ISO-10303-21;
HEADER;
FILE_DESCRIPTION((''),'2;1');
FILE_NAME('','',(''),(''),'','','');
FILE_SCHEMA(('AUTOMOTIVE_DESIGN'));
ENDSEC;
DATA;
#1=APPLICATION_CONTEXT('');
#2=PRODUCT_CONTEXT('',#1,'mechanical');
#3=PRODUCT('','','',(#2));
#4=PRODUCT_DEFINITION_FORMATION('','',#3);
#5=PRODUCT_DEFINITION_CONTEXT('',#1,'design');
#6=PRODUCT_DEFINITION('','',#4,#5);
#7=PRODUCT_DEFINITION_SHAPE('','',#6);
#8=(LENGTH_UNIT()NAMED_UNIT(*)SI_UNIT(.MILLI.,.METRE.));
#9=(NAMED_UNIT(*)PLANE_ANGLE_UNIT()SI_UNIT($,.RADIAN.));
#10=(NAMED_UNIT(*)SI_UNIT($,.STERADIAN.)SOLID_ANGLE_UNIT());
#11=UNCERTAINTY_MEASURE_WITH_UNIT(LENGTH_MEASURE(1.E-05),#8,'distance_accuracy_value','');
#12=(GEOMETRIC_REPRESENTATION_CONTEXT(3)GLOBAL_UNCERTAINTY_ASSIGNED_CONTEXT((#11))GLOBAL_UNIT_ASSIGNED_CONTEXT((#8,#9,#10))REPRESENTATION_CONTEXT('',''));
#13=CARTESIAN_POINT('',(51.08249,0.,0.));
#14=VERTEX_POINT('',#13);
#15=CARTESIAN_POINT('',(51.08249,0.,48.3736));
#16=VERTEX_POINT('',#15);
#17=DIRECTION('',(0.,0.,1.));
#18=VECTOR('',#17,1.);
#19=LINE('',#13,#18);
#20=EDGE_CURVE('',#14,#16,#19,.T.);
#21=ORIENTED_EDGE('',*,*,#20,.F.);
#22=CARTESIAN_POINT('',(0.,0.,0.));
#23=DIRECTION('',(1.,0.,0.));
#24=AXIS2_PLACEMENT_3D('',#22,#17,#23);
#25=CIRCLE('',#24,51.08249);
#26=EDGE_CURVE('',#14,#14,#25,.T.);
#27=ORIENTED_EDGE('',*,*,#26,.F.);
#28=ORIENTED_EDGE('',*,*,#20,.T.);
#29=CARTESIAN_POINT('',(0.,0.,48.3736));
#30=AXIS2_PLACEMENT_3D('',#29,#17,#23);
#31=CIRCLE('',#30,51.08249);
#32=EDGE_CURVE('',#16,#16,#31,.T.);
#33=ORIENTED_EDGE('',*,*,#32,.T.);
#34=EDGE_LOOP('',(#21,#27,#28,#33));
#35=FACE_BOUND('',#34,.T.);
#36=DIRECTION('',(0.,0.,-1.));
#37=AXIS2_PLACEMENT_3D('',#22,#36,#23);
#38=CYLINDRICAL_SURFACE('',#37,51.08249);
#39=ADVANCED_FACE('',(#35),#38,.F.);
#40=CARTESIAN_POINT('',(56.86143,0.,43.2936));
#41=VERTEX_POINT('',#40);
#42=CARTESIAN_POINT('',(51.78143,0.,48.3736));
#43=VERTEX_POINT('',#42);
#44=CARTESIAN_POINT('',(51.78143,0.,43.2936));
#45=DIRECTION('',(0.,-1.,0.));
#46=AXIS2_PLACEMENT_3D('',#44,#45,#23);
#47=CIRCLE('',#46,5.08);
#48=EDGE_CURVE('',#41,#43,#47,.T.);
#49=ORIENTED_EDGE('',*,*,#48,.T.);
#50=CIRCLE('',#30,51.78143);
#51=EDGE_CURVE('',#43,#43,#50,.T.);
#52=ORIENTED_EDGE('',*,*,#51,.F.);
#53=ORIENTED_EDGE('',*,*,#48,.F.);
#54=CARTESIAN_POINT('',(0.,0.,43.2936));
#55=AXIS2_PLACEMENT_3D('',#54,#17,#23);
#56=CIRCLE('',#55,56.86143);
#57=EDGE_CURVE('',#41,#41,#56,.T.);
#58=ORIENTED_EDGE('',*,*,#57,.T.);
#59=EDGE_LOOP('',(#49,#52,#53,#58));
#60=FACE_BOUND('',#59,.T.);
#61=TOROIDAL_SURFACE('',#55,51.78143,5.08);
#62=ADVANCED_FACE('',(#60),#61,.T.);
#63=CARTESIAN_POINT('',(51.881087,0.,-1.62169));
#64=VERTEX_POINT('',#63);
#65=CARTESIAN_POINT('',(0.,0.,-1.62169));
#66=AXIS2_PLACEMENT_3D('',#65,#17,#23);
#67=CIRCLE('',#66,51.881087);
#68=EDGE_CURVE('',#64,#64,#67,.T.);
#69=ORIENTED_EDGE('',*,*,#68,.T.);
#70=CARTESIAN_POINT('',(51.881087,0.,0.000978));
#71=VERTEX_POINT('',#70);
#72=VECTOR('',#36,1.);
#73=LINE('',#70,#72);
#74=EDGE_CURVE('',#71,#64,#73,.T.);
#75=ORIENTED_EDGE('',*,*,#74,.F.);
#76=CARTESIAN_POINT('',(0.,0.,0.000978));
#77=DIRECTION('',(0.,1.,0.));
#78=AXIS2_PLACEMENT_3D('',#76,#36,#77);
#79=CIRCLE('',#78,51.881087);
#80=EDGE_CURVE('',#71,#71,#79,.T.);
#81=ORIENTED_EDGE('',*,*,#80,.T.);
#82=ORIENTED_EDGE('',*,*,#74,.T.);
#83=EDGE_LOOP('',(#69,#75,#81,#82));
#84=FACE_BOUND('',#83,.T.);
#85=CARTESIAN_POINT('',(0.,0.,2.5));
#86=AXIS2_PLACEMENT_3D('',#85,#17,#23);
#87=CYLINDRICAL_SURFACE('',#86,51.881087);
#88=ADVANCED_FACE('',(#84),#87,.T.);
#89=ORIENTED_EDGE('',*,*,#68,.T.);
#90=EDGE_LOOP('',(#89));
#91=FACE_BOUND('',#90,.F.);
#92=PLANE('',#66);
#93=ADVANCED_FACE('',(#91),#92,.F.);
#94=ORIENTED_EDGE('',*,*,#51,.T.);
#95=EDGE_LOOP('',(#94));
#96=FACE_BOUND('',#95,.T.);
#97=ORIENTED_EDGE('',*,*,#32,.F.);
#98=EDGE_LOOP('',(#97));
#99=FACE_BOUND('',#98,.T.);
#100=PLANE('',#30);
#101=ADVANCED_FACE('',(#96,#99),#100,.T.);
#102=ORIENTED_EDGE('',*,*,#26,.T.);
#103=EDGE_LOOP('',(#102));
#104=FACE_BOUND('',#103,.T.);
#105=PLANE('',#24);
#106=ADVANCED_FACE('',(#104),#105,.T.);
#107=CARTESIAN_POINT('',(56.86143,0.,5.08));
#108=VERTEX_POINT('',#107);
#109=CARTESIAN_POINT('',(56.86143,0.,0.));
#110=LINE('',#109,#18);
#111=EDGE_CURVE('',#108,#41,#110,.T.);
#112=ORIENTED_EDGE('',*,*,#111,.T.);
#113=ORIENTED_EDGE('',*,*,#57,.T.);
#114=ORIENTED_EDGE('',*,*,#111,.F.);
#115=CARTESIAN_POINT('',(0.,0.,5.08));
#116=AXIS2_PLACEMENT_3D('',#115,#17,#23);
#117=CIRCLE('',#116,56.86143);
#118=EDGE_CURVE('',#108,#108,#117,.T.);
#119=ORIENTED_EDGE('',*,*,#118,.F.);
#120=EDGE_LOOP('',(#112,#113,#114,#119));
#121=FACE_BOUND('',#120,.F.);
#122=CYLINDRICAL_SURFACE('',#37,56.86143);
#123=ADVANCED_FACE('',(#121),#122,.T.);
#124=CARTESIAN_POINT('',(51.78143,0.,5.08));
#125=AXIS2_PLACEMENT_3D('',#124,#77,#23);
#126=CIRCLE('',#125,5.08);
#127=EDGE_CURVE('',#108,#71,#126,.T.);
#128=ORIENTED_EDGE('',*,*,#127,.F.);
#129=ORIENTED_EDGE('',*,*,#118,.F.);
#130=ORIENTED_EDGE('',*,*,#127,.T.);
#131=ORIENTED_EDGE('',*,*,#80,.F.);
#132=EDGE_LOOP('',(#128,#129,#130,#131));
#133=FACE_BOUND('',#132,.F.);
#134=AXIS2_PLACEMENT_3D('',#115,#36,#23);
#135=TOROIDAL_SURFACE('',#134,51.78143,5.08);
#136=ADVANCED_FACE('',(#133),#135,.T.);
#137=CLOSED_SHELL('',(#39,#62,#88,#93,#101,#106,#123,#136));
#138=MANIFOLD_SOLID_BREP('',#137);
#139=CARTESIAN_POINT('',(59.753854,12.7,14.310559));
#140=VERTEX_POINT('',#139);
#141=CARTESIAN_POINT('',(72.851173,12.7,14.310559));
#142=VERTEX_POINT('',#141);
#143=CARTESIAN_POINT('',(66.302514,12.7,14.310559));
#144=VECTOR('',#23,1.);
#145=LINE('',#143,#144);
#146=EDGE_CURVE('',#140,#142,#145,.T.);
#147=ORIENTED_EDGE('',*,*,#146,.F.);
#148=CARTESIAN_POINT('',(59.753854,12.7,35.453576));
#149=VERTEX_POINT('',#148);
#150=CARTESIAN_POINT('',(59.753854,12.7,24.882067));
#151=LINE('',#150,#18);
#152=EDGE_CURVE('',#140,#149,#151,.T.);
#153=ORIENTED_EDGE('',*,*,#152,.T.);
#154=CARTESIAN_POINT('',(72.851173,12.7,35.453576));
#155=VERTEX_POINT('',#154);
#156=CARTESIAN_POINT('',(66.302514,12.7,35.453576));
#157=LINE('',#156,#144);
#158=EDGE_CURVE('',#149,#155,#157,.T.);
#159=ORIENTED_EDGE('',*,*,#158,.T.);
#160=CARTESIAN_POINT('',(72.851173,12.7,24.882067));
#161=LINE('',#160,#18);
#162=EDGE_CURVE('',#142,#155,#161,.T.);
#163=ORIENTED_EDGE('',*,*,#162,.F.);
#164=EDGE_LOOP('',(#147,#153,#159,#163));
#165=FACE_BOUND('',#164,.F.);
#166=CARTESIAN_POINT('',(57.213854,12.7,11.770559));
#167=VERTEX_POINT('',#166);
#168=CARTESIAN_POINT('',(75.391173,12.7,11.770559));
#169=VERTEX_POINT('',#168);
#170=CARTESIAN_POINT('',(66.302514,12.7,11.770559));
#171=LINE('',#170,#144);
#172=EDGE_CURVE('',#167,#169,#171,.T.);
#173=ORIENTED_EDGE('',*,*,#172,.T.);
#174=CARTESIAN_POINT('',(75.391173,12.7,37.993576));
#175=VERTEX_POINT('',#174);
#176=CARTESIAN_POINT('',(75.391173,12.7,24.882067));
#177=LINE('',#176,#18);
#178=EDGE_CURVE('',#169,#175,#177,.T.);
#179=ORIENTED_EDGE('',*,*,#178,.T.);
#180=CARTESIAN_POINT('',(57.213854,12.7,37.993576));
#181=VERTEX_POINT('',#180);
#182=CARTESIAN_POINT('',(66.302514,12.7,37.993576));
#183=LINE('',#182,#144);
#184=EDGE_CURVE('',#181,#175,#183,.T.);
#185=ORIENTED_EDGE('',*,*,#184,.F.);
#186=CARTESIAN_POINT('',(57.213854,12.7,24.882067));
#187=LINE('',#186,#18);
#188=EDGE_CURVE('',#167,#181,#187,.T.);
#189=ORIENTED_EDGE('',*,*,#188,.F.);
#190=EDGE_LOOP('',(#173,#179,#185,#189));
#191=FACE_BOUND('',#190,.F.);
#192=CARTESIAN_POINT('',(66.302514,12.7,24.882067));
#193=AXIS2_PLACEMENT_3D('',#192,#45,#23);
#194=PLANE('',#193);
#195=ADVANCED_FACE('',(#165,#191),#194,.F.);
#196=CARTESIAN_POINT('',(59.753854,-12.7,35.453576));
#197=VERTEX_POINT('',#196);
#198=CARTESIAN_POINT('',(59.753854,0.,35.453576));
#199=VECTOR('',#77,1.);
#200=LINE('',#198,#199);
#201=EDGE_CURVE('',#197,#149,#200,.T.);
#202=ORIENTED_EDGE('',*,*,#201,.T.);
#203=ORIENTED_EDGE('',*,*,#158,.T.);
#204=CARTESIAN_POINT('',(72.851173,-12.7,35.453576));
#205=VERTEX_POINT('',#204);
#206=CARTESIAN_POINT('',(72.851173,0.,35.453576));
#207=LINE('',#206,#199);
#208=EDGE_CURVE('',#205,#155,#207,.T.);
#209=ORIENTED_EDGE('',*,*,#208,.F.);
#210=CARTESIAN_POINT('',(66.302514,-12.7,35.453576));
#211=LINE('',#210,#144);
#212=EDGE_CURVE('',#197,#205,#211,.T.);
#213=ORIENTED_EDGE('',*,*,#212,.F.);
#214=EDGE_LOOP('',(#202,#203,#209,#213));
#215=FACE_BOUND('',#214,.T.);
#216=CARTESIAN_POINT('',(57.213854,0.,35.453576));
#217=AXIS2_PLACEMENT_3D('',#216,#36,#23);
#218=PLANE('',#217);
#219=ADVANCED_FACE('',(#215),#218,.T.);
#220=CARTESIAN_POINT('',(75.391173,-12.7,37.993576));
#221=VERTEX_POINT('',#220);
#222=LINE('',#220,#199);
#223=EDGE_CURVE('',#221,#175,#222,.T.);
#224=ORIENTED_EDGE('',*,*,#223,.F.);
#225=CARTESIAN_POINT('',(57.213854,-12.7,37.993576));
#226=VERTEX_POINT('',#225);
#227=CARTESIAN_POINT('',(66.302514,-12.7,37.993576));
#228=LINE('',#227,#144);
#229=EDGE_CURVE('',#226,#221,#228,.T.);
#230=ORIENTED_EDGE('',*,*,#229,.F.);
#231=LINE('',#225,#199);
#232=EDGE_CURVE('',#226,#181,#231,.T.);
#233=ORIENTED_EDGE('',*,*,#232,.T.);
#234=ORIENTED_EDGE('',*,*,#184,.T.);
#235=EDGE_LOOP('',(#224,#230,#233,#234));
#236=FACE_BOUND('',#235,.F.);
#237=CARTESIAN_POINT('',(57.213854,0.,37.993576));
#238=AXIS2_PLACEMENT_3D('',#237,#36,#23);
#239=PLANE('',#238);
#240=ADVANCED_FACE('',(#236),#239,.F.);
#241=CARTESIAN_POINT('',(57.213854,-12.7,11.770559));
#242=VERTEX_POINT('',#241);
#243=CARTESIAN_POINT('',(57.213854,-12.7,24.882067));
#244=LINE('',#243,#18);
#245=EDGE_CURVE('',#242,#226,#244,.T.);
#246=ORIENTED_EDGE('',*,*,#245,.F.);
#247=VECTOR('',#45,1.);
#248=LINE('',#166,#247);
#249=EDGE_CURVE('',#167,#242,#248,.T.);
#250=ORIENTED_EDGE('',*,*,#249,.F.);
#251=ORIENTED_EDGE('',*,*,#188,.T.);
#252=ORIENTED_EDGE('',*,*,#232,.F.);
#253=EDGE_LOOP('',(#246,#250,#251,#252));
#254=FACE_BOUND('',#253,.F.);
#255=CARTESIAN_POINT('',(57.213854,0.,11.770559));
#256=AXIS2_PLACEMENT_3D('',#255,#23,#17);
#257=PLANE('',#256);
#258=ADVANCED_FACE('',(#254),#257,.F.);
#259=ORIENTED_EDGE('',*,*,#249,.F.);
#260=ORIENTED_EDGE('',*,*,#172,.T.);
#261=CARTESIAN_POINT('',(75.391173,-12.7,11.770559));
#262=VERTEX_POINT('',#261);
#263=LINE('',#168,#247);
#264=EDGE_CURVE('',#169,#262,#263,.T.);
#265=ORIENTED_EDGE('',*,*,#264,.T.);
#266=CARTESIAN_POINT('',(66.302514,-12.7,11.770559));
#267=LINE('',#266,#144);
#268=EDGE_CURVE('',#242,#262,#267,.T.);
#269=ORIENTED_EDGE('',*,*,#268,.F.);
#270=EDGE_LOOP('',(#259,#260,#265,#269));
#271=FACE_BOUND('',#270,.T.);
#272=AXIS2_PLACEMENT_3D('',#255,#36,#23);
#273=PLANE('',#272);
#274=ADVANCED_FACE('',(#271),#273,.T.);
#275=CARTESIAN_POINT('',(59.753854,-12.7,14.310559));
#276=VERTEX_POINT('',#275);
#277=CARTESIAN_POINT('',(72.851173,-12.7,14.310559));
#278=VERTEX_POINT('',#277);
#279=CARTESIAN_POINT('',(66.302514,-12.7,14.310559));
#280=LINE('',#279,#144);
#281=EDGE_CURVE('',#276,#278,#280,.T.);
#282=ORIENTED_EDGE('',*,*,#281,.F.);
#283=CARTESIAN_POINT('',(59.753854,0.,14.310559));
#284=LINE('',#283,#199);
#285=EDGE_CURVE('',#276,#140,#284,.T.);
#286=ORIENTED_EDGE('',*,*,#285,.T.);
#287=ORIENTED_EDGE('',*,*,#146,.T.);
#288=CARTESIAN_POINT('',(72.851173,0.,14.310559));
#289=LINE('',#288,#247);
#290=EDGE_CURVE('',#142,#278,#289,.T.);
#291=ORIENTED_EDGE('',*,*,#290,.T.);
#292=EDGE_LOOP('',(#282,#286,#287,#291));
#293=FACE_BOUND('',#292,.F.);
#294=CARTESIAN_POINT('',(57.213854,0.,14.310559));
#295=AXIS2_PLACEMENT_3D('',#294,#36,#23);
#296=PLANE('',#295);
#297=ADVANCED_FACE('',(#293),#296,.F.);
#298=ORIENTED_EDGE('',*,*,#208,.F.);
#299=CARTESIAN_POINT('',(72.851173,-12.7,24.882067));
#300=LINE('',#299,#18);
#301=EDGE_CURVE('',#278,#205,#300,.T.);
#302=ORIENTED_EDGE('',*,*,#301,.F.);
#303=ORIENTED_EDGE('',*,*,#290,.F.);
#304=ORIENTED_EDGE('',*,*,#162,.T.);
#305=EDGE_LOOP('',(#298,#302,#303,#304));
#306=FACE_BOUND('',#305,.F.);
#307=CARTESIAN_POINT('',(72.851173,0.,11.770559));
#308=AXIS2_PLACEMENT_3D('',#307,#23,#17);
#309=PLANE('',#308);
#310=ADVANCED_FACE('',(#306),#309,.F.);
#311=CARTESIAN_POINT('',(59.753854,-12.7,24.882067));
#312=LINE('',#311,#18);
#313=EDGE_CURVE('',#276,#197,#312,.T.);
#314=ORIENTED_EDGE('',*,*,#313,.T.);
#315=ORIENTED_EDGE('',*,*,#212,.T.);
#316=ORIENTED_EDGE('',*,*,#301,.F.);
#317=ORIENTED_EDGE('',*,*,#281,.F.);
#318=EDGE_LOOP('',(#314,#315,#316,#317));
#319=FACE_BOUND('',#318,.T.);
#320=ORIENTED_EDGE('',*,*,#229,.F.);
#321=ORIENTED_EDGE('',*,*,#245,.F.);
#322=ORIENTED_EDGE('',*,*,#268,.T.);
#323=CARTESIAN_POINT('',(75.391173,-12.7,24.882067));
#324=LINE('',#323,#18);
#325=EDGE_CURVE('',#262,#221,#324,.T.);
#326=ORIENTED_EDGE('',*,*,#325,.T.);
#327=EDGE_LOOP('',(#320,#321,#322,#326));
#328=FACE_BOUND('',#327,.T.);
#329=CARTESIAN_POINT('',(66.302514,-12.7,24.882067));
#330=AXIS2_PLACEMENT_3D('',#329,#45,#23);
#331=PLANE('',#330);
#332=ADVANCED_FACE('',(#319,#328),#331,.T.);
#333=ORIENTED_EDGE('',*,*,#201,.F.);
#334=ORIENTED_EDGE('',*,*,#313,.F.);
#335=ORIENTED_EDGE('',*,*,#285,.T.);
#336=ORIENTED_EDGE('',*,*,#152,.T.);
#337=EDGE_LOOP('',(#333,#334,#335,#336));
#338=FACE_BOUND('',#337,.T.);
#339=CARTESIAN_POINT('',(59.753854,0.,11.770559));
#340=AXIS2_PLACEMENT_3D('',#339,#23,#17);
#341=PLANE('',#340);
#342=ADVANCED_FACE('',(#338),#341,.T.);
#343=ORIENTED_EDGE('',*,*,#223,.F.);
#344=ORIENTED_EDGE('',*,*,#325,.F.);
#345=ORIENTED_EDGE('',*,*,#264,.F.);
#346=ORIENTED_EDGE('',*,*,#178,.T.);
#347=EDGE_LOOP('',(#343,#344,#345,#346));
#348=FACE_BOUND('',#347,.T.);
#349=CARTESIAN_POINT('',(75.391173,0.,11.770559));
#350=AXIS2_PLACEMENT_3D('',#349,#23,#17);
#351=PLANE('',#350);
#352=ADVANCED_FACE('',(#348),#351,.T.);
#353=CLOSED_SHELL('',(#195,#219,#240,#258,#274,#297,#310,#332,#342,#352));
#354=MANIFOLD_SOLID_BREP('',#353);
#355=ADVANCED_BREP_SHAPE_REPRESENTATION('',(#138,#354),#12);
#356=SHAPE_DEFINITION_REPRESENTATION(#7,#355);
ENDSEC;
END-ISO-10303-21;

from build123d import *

# Parameters (mm, degrees)
F0_R        = 56.8614302175
F0_R_2      = 51.0824903335
F1_DEPTH    = 48.3736
F2_R        = 51.8810866732
F3_DEPTH    = 1.62169
F4_W        = 18.1773193181
F4_H        = 26.2230178341
F5_DEPTH    = 12.7
F6_T        = -2.54
F7_R        = 5.08
F8_S5_R     = 51.8810866732
F8_T6_DEPTH = 89


# Not quite as in the source:
# - a fillet or chamfer that OpenCascade refuses, or shapes differently, is made with other operations: its cross-section is extruded or revolved along the edge and cut away or added


with BuildPart() as f1:
    # F0 (on Top) → F1 (new body)
    with BuildSketch(Plane.XY):
        Circle(F0_R)
        Circle(F0_R_2, mode=Mode.SUBTRACT)
    extrude(amount=F1_DEPTH)

    # F2 (on Top) → F3 (join)
    with BuildSketch(Plane.XY):
        Circle(F2_R)
    extrude(amount=-F3_DEPTH)

    # F7
    f7_edges = [f1.edges().sort_by_distance(p)[0] for p in [
        (-56.86143, 0, 48.3736),
    ]]
    fillet(f7_edges, radius=F7_R)

    # F8: fillet of radius 5.08 on 1 edges, made by hand


with BuildPart() as f5:
    # F4 (on Front) → F5 (new body, symmetric)
    with BuildSketch(Plane.XZ):
        with Locations((66.3025137037, 24.8820674606)):
            Rectangle(F4_W, F4_H)
    extrude(amount=F5_DEPTH, both=True)

    # F6
    f6_openings = [f5.faces().sort_by_distance(p)[0] for p in [
        (66.302514, -12.7, 24.882067),
        (66.302514, 12.7, 24.882067),
    ]]
    offset(amount=F6_T, openings=f6_openings)


with BuildPart() as f8_tool2:
    # F8_s3 → F8_t4 (revolve)
    with BuildSketch(Plane.XZ):
        with BuildLine():
            ThreePointArc((56.8614302175, 5.08), (55.3735326659, 1.4878975516), (51.7814302175, 0))
            Line((51.7814302175, 0), (56.8614302175, 0))
            Line((56.8614302175, 0), (56.8614302175, 5.08))
        make_face()
    revolve(axis=Axis((0, 0, 0), (0, 0, 1)))

    # F8_s5 → F8_t6 (cut, symmetric)
    with BuildSketch(Plane.XY.offset(2.5)):
        Circle(F8_S5_R)
    extrude(amount=F8_T6_DEPTH, both=True, mode=Mode.SUBTRACT)


with BuildPart() as f1_1:
    add(f1.part)

    # F8_t1: cut F8_tool2
    add(f8_tool2.part, mode=Mode.SUBTRACT)


solid = Compound([f5.part, f1_1.part])
